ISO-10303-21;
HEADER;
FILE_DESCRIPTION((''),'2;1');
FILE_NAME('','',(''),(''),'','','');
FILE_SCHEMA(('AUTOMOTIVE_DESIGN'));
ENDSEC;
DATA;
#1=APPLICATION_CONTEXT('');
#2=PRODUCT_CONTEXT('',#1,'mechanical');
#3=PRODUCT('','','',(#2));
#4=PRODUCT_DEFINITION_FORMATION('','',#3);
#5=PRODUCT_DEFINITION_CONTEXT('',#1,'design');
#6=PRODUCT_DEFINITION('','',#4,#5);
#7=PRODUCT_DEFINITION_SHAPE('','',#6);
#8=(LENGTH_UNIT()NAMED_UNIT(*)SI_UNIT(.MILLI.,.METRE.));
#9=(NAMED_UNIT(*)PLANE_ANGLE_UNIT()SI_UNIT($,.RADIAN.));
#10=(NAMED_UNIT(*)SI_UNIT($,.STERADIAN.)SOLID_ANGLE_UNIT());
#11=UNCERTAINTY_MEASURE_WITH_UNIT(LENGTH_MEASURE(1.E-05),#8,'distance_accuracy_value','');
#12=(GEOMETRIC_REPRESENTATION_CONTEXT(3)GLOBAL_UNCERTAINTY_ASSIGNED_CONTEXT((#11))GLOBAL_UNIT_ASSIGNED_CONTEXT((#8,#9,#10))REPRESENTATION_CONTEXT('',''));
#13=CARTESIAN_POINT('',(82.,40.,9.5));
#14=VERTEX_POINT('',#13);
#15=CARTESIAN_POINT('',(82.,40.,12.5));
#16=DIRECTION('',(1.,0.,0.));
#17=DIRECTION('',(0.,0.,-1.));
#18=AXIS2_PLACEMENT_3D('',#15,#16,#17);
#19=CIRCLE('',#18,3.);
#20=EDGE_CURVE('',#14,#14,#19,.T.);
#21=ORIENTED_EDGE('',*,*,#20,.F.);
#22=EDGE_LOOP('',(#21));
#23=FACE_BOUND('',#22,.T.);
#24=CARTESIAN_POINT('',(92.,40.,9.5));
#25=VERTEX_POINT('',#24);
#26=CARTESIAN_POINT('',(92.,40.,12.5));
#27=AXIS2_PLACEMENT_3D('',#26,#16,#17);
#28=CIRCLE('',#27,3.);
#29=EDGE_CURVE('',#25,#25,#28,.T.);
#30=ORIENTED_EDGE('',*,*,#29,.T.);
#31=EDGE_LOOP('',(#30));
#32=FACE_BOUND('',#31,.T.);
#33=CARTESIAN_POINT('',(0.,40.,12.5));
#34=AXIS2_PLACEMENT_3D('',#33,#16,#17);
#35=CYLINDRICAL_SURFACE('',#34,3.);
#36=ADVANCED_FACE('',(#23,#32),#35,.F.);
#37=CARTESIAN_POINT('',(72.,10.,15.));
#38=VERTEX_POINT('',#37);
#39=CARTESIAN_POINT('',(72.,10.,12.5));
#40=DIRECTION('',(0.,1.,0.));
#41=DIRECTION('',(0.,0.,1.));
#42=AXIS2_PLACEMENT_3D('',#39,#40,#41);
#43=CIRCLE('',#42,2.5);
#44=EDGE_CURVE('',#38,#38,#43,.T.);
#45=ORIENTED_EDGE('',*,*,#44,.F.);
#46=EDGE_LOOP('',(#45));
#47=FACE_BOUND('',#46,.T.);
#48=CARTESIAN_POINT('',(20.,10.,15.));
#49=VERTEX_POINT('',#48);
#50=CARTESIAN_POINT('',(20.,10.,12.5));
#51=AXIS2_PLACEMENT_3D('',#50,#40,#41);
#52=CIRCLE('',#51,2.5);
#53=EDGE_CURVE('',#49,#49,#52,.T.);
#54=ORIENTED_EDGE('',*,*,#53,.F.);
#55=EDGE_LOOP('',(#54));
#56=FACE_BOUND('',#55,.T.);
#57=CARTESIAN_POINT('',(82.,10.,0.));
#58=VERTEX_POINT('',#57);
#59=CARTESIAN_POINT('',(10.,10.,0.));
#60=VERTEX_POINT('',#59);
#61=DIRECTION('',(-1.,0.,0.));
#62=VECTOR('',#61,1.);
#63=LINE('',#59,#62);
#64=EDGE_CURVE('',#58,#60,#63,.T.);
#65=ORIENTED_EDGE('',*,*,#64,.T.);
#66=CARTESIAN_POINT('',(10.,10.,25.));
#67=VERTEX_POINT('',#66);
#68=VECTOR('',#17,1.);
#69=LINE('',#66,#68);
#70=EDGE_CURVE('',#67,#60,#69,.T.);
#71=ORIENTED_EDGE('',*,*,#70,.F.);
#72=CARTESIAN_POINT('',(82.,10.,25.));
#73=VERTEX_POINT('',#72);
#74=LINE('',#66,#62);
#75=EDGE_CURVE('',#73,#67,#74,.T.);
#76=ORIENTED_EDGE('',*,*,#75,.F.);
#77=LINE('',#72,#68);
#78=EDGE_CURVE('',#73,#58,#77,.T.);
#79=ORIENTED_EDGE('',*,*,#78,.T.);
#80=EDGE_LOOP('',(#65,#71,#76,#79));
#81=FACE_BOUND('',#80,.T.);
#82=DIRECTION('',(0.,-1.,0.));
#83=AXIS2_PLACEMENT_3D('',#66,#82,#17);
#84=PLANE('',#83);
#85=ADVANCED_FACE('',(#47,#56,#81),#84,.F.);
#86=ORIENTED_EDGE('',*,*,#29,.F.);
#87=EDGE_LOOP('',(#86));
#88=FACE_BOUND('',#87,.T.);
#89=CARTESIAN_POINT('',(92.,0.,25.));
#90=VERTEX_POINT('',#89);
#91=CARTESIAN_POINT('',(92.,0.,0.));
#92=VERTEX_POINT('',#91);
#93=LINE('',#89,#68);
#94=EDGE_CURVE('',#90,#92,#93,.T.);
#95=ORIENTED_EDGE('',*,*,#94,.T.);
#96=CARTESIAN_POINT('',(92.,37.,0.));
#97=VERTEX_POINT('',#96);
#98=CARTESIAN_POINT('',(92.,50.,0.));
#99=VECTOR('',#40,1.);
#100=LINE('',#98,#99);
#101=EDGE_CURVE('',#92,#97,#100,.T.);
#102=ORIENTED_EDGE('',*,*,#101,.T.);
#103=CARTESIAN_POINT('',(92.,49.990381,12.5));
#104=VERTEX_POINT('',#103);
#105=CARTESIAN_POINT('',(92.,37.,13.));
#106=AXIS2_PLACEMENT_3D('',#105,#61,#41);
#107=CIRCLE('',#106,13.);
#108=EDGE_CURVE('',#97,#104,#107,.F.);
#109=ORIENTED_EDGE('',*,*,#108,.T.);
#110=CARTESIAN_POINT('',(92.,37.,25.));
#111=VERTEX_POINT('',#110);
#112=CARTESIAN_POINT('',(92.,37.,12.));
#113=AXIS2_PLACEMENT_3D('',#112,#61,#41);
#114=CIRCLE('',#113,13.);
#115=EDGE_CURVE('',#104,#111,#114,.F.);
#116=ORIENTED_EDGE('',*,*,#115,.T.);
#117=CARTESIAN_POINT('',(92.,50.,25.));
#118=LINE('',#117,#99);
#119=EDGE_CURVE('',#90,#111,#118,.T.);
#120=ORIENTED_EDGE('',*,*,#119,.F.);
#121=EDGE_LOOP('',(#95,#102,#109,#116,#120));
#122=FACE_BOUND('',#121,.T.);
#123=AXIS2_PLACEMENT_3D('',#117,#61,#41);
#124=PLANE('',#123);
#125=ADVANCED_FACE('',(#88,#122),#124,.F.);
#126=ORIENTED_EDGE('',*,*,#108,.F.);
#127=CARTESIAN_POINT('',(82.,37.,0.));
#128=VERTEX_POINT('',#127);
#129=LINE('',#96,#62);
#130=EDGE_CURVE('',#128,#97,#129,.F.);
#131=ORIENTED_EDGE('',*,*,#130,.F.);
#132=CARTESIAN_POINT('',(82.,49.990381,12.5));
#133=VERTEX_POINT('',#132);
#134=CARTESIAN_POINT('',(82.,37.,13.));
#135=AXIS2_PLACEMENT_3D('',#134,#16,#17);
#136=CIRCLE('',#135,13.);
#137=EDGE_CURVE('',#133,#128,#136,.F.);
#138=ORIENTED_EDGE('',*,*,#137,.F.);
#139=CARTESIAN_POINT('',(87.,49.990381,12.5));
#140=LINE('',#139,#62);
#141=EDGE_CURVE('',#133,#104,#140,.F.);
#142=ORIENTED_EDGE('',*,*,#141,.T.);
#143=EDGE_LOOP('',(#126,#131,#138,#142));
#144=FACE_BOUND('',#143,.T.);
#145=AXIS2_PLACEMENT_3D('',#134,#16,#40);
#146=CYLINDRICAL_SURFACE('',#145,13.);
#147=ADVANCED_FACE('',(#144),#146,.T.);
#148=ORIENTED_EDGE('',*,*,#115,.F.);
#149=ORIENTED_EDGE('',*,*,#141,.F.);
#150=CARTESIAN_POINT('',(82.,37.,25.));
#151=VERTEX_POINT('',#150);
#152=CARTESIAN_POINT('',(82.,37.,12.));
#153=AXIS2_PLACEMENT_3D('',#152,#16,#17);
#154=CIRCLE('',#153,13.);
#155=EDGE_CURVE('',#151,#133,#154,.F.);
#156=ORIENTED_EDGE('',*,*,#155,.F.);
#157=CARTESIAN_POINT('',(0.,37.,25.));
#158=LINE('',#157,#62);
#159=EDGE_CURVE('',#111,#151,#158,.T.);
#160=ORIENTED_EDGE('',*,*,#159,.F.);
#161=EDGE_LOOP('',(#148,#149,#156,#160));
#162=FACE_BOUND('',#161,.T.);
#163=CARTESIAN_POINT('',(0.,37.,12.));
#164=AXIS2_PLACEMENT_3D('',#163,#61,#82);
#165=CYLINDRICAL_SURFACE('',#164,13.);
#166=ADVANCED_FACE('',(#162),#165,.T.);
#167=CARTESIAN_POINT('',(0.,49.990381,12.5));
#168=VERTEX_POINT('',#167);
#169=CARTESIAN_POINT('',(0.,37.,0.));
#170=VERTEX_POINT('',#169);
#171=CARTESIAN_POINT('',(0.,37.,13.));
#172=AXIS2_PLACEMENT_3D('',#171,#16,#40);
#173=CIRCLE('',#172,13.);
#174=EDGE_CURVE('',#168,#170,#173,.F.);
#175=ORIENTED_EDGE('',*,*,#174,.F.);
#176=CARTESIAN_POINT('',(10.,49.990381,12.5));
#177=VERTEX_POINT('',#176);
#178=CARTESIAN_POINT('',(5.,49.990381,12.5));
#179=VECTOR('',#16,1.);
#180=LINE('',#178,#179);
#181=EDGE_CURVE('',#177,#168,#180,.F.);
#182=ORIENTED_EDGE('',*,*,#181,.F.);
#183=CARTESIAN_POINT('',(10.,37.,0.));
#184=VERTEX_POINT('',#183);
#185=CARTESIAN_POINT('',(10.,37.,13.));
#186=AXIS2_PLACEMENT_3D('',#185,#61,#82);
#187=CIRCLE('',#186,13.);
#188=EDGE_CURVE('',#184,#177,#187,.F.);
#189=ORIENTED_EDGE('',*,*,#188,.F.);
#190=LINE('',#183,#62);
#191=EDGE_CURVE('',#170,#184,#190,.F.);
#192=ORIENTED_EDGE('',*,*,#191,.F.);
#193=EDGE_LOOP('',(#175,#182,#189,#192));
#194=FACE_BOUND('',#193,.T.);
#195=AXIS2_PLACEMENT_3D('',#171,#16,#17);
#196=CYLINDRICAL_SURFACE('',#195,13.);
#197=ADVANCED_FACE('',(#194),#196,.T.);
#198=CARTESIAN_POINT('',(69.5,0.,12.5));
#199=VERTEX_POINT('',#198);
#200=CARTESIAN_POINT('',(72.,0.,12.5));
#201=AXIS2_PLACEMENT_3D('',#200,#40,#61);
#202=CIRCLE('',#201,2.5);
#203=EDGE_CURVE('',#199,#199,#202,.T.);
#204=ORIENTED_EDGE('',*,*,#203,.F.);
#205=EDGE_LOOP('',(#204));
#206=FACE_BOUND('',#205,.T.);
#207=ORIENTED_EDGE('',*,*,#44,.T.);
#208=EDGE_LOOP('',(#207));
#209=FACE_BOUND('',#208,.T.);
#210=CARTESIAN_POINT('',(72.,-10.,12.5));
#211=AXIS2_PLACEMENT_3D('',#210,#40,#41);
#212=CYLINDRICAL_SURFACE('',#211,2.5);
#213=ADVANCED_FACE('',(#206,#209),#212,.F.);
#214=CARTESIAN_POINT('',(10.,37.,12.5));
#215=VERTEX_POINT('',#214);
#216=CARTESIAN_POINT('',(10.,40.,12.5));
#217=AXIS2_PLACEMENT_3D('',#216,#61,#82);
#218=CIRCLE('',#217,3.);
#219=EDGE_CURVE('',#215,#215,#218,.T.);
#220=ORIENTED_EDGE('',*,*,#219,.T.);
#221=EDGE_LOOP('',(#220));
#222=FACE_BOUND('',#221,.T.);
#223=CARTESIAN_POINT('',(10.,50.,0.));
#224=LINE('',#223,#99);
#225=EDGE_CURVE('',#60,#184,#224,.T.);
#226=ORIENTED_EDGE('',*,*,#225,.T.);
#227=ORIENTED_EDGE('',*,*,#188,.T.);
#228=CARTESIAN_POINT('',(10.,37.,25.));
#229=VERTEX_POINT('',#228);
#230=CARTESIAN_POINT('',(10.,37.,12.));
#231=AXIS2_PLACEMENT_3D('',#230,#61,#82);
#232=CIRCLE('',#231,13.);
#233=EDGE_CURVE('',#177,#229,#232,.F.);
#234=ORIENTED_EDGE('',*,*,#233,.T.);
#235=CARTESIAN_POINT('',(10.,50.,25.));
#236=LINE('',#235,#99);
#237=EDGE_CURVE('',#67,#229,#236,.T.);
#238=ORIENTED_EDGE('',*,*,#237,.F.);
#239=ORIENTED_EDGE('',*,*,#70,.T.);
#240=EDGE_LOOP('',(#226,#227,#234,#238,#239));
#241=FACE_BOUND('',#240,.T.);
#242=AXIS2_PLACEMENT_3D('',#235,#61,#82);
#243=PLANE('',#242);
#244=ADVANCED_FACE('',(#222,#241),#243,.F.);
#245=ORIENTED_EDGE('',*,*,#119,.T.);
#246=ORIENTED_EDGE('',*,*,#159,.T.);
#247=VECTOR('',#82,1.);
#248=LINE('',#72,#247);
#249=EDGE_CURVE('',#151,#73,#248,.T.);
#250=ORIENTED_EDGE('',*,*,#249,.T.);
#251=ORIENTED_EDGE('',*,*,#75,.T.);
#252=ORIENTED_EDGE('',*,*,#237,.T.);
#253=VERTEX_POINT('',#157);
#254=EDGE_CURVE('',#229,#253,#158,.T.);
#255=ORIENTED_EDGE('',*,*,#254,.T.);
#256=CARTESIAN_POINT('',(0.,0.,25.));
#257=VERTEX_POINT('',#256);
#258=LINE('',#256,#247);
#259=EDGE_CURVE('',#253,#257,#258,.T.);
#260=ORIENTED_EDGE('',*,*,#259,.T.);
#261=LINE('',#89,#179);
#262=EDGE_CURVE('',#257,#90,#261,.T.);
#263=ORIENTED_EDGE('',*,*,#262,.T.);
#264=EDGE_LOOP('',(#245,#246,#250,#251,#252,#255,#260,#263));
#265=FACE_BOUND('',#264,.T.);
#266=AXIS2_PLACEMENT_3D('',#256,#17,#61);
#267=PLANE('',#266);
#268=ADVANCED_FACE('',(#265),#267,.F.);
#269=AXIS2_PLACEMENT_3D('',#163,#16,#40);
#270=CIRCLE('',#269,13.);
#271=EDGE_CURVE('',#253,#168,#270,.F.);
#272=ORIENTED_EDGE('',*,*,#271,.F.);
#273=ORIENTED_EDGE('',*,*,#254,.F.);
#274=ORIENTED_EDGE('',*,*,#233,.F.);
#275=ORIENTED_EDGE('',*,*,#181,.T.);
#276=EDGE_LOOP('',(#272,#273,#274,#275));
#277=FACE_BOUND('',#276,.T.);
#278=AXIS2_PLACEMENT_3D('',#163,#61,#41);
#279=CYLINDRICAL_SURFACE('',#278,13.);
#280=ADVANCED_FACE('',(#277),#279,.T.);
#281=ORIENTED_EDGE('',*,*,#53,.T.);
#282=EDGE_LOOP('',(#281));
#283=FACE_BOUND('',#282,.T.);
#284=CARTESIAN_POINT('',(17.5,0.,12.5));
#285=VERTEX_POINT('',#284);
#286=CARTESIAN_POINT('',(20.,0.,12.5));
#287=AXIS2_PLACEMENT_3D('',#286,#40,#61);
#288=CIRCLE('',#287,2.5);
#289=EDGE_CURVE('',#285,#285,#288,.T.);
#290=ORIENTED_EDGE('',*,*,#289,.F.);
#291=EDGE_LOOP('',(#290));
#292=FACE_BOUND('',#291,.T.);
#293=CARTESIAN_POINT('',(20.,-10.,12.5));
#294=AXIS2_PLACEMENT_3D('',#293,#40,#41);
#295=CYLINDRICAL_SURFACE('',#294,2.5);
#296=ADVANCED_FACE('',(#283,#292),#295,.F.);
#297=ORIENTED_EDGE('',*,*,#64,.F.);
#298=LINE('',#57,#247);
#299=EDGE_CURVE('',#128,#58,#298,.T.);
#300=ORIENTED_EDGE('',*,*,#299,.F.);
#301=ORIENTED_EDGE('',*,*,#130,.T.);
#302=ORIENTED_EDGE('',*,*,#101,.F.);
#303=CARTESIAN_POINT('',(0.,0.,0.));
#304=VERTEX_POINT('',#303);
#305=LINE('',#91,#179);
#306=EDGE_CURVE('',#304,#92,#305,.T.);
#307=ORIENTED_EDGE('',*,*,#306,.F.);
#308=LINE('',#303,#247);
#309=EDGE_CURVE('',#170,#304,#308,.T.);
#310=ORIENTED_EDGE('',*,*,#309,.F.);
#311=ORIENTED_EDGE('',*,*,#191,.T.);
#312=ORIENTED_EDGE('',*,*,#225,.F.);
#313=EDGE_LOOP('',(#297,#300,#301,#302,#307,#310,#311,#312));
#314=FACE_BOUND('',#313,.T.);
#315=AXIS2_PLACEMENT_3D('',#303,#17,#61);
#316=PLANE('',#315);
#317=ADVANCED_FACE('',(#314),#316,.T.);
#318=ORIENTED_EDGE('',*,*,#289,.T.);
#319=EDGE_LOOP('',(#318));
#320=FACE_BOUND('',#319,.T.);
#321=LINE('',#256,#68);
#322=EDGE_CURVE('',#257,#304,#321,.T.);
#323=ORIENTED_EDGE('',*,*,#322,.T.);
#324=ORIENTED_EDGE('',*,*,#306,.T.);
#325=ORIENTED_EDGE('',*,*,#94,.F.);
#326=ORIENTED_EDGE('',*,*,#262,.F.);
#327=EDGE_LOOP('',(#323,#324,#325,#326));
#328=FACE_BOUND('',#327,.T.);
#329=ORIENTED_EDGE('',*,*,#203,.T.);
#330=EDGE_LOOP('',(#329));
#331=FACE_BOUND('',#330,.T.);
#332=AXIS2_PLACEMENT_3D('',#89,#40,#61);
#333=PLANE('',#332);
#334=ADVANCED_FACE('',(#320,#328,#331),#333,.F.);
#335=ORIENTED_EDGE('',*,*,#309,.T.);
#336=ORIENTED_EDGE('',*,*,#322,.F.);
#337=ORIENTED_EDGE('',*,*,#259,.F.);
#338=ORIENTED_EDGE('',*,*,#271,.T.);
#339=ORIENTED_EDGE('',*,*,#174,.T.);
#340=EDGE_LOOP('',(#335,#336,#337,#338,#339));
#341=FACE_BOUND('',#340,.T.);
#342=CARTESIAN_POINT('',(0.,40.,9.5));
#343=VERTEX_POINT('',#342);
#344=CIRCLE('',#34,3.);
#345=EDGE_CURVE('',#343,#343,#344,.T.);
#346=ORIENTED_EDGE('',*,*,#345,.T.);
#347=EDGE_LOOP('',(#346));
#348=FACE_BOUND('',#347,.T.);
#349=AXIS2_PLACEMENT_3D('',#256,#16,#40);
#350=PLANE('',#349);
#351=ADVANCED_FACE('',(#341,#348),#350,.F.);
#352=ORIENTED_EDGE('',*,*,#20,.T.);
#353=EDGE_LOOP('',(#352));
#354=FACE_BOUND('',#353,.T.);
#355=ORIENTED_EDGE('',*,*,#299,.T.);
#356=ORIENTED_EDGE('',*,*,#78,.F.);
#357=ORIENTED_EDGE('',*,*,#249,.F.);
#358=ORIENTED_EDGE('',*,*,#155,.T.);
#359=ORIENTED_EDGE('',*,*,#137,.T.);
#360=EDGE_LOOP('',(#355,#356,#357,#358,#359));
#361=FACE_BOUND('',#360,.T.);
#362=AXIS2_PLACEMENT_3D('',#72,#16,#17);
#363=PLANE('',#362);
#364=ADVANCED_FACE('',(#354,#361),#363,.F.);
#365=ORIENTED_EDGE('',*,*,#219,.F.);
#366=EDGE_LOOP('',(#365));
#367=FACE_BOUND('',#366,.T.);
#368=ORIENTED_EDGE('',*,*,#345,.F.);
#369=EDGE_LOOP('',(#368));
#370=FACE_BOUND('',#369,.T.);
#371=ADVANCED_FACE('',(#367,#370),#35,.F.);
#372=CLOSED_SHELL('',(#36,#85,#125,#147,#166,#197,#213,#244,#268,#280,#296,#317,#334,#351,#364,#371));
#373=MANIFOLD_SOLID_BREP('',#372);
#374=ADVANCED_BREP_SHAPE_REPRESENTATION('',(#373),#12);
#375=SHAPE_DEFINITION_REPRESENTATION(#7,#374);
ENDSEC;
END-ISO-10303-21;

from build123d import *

# Parameters (mm, degrees)
BOSS_EXTRUDE1_DEPTH = 25
SKETCH2_R           = 3
CUT_EXTRUDE1_DEPTH  = 108.652217813
SKETCH3_R           = 2.5
CUT_EXTRUDE2_DEPTH  = 20
FILLET2_R           = 13


with BuildPart() as part:
    # Sketch1 → Boss-Extrude1 (new body)
    with BuildSketch(Plane.XY):
        Polygon((0, 50), (10, 50), (10, 10), (82, 10), (82, 50), (92, 50), (92, 0), (0, 0), align=None)
    extrude(amount=BOSS_EXTRUDE1_DEPTH)

    # Sketch2 → Cut-Extrude1 (cut, through all)
    with BuildSketch(Plane(origin=(92, 0, 0), x_dir=(0, 0, -1), z_dir=(1, 0, 0))):
        with Locations((-12.5, 40)):
            Circle(SKETCH2_R)
    extrude(amount=-CUT_EXTRUDE1_DEPTH, mode=Mode.SUBTRACT)

    # Sketch3 → Cut-Extrude2 (cut)
    with BuildSketch(Plane(origin=(0, 10, 0), x_dir=(1, 0, 0), z_dir=(0, 1, 0))):
        with Locations(Location((20, -12.5, 0), (0, 0, 270))):
            Circle(SKETCH3_R)
        with Locations(Location((72, -12.5, 0), (0, 0, 270))):
            Circle(SKETCH3_R)
    extrude(amount=-CUT_EXTRUDE2_DEPTH, mode=Mode.SUBTRACT)

    # Fillet2
    # the kernel refuses this fillet: 13 mm, written as the material it takes off along each edge
    with BuildSketch(Plane(origin=(49.5, 50, 0), x_dir=(0, -1, 0), z_dir=(1, 0, 0)), Plane(origin=(-32.5, 50, 25), x_dir=(0, 0, -1), z_dir=(1, 0, 0))) as fillet2_piece_1:
        with BuildLine():
            CenterArc((FILLET2_R, -FILLET2_R), FILLET2_R, 90, 90)
            Line((0, -FILLET2_R), (0, 0))
            Line((0, 0), (FILLET2_R, 0))
        make_face()
    extrude(amount=75, mode=Mode.SUBTRACT)
    with BuildSketch(Plane(origin=(49.5, 50, 25), x_dir=(0, -1, 0), z_dir=(1, 0, 0)), Plane(origin=(-32.5, 50, 0), x_dir=(0, 0, 1), z_dir=(1, 0, 0))) as fillet2_piece_2:
        with BuildLine():
            CenterArc((FILLET2_R, FILLET2_R), FILLET2_R, 180, 90)
            Line((0, FILLET2_R), (0, 0))
            Line((0, 0), (FILLET2_R, 0))
        make_face()
    extrude(amount=75, mode=Mode.SUBTRACT)


solid = part.part
